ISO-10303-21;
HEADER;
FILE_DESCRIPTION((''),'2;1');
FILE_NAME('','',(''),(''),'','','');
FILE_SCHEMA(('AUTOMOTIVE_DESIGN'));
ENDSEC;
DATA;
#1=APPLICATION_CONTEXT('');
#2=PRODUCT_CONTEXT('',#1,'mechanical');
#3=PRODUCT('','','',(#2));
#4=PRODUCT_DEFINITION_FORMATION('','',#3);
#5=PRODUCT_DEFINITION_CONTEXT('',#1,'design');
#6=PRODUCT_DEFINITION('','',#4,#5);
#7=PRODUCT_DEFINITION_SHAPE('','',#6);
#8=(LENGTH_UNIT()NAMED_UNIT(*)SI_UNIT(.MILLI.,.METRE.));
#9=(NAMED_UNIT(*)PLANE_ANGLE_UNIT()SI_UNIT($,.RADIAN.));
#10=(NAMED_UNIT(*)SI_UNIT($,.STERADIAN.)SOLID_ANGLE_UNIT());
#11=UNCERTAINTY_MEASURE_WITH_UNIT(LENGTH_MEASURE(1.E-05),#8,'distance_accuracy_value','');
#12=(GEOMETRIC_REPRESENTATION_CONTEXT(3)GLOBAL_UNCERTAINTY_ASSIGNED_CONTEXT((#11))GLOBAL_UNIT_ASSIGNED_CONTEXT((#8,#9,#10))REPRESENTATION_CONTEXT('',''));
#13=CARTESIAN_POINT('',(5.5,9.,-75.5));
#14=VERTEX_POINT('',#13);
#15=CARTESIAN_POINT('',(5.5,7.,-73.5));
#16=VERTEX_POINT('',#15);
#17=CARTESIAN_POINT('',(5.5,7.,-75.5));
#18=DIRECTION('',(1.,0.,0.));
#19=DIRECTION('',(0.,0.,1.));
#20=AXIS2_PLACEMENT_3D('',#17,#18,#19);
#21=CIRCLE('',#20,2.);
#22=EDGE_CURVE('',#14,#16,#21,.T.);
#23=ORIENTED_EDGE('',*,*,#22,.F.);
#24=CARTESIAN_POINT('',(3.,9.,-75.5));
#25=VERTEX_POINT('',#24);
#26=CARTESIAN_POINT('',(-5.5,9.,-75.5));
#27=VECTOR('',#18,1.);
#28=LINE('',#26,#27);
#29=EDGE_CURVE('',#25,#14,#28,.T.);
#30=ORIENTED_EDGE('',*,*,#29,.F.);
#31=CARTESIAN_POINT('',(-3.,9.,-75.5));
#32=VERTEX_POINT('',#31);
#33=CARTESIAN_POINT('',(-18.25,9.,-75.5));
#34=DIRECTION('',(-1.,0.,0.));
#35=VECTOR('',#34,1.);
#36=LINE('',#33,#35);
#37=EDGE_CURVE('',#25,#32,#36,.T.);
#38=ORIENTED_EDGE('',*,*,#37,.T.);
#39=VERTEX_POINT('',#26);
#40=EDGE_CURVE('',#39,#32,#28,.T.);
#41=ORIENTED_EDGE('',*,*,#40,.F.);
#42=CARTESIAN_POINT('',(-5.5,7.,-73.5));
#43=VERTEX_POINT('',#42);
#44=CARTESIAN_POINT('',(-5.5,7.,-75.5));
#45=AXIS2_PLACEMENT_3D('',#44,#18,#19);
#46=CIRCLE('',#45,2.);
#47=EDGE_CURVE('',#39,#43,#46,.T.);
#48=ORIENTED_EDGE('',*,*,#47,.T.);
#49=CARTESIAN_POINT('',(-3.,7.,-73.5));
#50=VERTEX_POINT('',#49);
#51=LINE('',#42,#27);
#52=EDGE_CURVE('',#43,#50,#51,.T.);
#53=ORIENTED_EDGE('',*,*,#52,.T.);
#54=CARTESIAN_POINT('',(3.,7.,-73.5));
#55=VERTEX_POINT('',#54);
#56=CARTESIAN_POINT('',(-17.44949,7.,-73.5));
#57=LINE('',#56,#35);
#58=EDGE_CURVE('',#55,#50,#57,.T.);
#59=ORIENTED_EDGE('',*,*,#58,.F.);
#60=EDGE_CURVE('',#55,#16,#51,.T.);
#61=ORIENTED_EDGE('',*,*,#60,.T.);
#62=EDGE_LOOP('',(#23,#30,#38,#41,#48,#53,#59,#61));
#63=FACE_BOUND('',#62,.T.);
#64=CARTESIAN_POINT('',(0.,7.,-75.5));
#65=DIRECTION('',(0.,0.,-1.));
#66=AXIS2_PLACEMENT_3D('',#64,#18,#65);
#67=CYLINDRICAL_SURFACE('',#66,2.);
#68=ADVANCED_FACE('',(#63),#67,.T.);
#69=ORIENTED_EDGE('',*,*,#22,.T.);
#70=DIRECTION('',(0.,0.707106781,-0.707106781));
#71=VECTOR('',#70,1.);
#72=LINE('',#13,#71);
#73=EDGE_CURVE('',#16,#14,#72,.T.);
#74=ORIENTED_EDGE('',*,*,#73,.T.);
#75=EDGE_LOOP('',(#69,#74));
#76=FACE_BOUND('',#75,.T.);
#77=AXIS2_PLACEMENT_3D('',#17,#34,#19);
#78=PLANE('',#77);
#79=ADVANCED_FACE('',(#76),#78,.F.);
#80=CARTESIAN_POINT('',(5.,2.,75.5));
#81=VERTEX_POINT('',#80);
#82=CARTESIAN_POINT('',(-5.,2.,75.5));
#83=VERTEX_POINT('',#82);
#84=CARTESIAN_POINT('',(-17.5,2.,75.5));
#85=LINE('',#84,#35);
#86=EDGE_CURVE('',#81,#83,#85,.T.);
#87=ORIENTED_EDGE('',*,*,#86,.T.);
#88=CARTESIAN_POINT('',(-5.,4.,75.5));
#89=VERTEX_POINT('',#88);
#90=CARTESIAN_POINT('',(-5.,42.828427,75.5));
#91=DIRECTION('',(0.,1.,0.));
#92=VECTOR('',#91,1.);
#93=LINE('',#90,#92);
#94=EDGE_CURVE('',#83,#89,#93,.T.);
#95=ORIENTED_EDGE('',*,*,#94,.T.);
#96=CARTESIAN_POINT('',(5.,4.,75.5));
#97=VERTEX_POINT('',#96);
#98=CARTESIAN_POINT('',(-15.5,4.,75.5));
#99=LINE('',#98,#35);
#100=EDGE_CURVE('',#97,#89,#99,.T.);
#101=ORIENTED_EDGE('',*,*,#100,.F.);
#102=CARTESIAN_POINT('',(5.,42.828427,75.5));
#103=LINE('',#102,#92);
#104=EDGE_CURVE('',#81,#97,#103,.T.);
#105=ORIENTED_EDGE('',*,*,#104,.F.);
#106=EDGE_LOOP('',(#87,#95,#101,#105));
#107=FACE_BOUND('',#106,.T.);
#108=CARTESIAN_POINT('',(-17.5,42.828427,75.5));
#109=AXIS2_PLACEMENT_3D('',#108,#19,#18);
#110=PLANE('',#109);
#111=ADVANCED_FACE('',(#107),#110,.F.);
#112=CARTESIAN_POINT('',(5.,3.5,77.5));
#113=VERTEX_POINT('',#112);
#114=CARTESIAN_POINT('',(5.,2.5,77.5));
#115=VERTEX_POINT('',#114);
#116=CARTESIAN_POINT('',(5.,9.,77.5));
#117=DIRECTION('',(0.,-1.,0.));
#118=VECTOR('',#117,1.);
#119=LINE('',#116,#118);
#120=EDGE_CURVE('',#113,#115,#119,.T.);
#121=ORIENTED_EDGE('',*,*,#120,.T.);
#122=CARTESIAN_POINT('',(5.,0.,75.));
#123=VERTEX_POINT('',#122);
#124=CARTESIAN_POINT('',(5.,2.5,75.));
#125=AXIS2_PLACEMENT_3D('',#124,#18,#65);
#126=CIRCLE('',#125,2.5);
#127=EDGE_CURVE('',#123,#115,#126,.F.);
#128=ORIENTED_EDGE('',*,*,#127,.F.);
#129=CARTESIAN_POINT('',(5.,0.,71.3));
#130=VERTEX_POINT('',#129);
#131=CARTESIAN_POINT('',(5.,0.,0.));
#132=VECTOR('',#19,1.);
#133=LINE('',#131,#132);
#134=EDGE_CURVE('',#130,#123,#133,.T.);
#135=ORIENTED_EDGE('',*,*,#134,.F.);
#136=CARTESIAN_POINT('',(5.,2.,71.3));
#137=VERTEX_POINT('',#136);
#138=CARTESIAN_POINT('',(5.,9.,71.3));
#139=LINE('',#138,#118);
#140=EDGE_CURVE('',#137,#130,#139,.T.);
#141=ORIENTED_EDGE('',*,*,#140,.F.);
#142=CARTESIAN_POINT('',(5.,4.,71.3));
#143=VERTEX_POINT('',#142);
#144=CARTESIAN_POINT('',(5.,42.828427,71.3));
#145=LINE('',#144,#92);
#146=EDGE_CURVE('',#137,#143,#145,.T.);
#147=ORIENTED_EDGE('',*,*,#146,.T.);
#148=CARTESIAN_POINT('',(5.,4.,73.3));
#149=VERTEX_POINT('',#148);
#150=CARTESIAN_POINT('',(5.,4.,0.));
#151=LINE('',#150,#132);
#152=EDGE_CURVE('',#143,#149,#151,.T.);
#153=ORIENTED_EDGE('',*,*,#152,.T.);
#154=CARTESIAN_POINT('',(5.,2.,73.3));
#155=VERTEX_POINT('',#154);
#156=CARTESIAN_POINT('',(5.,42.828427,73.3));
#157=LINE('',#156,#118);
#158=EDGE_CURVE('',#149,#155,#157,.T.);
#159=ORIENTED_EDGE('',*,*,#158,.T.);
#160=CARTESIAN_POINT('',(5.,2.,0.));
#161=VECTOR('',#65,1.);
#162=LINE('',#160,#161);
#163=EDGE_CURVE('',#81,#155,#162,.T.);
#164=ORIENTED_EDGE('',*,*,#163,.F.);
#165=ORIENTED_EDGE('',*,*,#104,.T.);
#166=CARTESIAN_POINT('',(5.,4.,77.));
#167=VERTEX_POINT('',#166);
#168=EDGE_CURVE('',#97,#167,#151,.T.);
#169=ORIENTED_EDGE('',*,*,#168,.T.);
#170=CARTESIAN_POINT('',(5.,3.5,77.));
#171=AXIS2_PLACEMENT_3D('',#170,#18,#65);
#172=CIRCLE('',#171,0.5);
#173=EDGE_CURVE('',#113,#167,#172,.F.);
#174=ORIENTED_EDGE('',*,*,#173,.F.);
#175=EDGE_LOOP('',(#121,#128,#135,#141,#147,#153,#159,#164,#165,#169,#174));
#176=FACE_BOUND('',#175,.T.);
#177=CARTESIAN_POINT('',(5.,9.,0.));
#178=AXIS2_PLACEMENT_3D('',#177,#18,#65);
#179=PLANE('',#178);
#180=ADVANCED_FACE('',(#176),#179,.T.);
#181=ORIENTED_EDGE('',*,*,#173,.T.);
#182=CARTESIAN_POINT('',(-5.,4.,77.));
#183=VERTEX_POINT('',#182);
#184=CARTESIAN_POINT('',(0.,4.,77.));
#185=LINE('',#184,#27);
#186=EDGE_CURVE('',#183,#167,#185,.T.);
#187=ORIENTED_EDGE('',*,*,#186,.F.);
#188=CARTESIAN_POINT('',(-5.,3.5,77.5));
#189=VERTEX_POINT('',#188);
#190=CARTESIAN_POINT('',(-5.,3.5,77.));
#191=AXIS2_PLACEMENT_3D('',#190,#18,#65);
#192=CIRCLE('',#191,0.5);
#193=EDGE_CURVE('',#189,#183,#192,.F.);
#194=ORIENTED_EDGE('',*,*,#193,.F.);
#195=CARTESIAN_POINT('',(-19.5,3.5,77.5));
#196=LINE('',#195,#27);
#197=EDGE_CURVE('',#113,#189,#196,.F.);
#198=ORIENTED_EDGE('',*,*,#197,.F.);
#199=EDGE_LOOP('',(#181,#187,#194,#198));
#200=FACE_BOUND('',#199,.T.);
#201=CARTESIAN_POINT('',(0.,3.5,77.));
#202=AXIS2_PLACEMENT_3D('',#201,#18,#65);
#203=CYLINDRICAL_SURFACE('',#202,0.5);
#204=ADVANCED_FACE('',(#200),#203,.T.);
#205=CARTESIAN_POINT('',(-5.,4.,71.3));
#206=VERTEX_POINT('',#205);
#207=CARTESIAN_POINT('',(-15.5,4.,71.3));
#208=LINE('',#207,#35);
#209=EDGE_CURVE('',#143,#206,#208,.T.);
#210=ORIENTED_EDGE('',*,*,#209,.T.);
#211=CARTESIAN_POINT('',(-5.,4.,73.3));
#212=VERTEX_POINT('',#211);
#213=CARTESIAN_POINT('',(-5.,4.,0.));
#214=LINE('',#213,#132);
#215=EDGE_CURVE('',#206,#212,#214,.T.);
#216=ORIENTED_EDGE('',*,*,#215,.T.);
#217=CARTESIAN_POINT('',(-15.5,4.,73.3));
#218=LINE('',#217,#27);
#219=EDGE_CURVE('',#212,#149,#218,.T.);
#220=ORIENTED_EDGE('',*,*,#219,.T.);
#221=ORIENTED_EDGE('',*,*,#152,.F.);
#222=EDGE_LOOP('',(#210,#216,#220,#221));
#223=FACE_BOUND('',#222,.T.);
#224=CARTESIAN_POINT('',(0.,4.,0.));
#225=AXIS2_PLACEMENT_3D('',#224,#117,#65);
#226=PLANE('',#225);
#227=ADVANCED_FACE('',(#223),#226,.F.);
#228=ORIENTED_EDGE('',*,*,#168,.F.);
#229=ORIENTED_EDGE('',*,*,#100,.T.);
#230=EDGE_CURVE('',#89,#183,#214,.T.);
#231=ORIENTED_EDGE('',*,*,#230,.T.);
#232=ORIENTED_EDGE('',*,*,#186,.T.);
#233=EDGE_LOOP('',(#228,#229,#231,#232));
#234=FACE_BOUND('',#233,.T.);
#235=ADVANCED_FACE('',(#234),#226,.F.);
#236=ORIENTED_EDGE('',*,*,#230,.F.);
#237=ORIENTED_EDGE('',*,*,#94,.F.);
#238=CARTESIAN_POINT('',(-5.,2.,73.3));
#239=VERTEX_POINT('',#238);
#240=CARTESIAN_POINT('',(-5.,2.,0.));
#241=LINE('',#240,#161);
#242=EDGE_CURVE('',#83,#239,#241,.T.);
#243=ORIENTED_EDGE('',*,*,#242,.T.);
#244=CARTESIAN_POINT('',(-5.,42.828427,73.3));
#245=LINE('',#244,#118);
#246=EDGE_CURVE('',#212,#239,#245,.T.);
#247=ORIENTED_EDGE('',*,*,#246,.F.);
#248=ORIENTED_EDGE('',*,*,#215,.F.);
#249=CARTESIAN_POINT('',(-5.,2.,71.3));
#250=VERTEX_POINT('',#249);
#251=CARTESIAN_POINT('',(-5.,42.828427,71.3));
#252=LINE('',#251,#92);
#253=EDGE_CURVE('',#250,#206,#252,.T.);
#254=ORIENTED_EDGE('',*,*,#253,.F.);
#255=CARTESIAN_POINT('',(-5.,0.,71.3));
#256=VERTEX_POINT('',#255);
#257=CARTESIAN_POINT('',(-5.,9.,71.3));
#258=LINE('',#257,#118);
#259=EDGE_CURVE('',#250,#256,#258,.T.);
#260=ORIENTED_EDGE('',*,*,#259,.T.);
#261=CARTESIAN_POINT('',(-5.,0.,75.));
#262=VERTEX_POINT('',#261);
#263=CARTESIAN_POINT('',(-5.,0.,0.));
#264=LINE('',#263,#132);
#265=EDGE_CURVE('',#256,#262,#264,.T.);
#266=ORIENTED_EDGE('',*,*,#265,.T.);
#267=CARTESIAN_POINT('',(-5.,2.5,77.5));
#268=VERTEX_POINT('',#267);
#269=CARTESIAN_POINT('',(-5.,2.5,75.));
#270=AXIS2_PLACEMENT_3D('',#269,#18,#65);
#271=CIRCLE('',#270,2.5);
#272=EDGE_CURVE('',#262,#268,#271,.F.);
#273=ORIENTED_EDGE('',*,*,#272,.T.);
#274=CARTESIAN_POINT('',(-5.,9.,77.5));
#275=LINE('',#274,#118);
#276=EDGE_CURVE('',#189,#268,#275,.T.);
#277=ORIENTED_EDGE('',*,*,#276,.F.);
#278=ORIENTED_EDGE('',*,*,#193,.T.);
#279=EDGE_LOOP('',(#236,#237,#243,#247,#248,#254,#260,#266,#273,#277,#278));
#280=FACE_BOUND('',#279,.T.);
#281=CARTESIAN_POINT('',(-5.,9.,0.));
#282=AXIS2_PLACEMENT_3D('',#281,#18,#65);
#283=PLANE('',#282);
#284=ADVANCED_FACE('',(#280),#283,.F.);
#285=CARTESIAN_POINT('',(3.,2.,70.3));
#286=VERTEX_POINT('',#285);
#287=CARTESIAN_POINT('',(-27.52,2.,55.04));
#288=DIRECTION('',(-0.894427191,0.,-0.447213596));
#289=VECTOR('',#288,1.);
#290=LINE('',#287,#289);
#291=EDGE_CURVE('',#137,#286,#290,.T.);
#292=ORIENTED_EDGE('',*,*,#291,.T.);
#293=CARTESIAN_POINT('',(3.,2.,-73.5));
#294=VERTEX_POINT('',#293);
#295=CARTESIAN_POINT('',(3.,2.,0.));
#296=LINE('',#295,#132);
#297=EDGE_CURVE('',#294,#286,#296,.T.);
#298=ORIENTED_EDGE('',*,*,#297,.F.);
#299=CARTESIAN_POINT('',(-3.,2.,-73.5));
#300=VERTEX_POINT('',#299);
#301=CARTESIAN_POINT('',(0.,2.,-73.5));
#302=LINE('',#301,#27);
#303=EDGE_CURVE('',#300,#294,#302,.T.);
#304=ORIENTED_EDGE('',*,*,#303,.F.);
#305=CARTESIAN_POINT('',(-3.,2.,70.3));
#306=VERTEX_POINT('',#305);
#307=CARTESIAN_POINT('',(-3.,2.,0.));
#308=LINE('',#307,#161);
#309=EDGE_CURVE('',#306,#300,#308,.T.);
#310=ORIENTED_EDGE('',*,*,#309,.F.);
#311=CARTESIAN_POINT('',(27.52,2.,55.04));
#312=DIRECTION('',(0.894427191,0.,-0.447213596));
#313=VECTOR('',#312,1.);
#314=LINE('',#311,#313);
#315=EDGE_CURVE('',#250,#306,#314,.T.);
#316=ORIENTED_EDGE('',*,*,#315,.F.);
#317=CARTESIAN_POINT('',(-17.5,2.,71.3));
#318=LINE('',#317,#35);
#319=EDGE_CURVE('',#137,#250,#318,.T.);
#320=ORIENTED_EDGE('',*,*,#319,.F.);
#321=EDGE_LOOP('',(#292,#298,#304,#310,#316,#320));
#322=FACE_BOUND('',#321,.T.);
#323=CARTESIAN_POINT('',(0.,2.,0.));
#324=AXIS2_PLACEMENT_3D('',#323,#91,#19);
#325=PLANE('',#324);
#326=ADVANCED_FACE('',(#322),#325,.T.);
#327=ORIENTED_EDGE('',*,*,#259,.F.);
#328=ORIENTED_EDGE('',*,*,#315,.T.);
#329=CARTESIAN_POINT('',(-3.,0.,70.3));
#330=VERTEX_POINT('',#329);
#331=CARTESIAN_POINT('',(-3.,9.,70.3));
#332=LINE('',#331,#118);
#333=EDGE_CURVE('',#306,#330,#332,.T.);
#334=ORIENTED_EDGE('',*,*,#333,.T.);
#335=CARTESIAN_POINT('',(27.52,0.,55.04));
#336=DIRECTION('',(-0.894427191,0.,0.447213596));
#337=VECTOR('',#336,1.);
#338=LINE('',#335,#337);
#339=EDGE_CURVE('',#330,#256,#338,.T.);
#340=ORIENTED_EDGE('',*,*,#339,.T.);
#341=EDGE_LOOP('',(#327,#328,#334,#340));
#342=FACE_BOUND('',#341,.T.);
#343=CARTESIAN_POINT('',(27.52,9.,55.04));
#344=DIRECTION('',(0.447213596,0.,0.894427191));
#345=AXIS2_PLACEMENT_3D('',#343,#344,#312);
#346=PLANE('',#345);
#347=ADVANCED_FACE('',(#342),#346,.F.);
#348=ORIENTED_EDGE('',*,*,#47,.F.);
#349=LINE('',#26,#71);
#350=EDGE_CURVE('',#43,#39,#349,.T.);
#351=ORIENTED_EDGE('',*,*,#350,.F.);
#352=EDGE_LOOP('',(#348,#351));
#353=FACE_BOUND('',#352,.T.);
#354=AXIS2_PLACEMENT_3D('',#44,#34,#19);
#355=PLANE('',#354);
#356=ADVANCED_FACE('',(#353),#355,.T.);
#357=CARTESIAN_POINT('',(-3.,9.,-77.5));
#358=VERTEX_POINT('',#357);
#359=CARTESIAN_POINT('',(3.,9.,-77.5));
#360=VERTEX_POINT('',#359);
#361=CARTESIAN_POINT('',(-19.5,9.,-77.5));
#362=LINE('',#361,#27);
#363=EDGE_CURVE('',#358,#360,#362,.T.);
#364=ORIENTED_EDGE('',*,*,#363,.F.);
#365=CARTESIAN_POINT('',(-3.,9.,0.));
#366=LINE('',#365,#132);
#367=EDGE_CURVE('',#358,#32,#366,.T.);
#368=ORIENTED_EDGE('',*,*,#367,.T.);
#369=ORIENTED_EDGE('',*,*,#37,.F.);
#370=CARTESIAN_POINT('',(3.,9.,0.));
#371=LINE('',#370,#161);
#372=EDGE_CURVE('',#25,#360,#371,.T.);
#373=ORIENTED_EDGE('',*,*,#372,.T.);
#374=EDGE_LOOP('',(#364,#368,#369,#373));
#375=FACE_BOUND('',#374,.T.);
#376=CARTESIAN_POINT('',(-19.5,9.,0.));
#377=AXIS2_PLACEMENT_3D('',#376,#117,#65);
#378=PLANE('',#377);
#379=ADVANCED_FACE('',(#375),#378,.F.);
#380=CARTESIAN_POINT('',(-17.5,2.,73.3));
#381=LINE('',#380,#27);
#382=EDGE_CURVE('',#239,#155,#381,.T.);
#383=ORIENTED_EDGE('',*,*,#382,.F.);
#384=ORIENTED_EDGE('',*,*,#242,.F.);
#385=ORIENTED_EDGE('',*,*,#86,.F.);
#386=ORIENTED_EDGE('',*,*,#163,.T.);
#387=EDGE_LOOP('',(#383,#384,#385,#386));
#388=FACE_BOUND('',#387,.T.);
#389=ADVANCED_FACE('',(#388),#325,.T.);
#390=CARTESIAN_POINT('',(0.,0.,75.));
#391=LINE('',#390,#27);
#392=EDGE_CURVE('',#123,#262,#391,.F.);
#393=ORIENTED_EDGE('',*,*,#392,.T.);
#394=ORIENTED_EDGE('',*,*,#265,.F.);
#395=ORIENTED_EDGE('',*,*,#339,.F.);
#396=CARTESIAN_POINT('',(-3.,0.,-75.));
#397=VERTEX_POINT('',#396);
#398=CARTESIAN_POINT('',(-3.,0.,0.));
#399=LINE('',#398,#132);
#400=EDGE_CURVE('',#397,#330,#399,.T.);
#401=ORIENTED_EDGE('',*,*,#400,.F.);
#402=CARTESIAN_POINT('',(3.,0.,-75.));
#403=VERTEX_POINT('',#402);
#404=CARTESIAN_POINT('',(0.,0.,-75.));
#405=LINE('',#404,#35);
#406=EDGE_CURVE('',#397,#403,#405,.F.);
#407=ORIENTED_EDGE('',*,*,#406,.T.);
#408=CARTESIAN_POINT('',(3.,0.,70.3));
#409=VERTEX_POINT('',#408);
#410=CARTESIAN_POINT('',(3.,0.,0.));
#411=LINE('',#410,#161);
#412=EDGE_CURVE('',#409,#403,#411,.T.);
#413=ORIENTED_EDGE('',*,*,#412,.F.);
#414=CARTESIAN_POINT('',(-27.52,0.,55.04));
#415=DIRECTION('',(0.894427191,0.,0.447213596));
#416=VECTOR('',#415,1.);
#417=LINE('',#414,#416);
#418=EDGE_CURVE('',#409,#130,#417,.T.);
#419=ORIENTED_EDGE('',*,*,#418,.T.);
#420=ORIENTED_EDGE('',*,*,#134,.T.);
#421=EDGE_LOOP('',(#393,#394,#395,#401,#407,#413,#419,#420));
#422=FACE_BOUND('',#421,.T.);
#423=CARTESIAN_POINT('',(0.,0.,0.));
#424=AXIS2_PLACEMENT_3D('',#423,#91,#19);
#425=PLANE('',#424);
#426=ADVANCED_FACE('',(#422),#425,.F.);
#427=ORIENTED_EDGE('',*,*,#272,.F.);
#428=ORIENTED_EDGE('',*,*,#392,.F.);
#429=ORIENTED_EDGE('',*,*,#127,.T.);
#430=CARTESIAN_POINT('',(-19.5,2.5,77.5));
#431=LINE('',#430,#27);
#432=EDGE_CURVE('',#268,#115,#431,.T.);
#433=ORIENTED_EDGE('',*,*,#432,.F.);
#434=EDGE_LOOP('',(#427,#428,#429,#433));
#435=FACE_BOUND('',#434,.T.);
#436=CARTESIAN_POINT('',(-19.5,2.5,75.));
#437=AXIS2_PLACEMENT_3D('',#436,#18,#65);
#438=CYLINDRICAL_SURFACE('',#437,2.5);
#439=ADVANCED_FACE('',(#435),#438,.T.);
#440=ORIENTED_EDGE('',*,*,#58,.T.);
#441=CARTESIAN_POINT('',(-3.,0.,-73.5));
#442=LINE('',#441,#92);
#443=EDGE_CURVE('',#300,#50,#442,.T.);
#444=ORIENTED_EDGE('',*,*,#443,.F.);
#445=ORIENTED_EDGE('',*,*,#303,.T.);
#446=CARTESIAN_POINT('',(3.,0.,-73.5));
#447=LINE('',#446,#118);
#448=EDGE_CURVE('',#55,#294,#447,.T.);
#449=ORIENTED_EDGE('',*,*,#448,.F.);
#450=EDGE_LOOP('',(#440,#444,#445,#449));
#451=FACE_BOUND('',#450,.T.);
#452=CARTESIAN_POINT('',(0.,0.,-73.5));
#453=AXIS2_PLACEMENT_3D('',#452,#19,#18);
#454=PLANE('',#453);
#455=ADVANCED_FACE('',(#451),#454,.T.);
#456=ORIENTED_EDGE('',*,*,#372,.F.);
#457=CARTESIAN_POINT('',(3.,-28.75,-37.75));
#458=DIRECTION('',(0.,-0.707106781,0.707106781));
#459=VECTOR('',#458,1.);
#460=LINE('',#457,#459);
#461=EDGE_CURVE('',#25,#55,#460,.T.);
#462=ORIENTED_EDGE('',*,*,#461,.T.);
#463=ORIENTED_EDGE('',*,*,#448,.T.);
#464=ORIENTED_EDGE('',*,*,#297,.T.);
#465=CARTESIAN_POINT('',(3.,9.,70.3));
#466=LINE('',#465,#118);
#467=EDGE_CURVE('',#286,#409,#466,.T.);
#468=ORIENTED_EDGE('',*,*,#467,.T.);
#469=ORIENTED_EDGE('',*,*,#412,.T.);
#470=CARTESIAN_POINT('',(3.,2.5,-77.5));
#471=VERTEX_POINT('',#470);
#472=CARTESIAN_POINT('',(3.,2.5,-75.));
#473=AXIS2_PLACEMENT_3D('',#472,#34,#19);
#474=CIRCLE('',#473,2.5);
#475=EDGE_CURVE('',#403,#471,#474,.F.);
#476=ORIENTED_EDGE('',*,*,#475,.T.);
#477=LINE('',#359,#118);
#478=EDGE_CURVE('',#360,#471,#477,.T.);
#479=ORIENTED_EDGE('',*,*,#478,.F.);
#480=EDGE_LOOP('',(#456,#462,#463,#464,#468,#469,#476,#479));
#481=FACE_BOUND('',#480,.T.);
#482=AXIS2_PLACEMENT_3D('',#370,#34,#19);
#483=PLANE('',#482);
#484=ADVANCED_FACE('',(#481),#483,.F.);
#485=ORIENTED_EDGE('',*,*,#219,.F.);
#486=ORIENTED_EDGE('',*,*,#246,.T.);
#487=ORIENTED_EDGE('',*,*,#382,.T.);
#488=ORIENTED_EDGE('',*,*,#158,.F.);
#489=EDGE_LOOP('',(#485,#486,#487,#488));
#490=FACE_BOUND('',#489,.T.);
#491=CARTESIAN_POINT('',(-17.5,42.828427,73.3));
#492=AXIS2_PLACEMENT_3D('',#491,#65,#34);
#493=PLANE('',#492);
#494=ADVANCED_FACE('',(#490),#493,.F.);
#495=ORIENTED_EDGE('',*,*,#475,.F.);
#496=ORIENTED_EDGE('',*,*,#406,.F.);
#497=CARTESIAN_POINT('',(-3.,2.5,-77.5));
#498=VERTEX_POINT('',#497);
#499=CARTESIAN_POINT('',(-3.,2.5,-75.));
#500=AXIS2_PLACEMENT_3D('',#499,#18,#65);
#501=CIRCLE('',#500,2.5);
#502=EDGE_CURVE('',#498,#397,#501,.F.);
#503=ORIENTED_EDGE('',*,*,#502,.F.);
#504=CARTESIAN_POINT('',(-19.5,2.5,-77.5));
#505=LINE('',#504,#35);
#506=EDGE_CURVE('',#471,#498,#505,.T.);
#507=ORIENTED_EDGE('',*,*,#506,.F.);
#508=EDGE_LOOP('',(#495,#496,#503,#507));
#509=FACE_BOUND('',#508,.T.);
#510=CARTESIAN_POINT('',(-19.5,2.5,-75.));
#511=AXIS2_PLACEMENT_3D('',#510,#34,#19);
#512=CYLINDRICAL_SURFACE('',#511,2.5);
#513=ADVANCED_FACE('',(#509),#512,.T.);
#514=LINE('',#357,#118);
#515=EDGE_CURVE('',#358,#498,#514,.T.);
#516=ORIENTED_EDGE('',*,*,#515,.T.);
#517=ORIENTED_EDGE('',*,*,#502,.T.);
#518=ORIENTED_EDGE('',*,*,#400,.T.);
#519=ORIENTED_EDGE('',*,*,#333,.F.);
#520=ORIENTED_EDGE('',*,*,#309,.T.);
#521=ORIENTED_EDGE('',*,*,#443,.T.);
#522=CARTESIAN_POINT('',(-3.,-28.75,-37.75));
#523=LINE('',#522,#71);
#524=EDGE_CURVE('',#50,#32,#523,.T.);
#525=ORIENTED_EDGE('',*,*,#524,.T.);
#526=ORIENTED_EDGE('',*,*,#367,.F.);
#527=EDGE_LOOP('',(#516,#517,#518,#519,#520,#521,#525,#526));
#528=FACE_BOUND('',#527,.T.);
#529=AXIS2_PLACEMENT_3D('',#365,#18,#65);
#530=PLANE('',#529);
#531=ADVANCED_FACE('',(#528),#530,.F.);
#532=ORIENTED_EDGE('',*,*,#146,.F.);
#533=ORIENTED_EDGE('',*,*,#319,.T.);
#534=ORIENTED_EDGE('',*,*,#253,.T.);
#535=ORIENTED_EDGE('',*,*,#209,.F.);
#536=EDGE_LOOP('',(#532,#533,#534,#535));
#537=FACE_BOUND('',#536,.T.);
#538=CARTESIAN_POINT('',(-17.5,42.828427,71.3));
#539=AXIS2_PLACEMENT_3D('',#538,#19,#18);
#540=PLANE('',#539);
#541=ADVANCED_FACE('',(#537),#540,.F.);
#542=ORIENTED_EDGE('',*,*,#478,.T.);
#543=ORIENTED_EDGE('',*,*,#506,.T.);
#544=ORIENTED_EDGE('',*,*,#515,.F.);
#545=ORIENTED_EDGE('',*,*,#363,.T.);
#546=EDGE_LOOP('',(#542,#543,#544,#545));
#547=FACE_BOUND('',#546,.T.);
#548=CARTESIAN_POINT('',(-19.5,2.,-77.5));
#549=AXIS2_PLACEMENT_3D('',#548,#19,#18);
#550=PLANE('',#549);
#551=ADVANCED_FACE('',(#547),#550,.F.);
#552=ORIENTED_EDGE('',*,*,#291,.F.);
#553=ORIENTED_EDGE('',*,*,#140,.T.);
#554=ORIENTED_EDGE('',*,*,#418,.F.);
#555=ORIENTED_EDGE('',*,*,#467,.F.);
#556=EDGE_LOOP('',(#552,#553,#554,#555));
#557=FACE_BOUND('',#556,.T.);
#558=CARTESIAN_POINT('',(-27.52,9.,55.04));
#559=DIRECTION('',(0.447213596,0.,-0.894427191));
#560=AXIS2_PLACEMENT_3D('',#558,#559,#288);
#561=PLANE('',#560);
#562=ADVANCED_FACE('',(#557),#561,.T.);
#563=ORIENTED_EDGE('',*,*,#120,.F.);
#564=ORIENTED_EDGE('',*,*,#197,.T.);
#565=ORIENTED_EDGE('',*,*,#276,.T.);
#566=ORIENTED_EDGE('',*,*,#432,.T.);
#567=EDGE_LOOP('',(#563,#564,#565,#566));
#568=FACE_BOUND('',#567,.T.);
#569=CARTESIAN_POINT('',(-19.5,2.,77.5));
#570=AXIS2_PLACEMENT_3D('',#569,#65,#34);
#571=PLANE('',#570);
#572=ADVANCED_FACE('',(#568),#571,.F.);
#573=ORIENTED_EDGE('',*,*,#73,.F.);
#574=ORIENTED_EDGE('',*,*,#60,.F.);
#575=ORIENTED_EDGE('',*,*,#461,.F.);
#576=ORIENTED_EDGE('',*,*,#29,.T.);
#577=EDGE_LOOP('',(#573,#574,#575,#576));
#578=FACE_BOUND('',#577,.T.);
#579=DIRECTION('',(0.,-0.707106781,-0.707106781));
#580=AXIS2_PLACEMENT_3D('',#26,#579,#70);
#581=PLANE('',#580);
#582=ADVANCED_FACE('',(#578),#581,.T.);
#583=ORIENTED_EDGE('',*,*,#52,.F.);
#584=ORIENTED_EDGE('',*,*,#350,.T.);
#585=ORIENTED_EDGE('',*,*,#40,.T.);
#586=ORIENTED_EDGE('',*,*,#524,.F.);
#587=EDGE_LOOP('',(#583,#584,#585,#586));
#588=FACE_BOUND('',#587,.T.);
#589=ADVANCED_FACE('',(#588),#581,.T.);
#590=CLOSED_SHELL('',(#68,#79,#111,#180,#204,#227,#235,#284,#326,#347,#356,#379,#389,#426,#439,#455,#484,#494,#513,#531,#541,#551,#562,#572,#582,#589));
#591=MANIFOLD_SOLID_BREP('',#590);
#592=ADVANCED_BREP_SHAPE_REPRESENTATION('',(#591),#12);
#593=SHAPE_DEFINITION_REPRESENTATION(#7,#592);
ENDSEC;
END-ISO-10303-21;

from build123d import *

# Parameters (mm, degrees)
SKETCH1_W                       = 39
SKETCH1_H                       = 155
BOSS_EXTRUDE1_DEPTH             = 2
BOSS_EXTRUDE2_DEPTH             = 38
SKETCH3_W                       = 2
SKETCH3_H                       = 2
BOSS_EXTRUDE3_DEPTH             = 38
SKETCH4_W                       = 2
SKETCH4_H                       = 2
BOSS_EXTRUDE4_DEPTH             = 151
SKETCH6_W                       = 35
SKETCH6_H                       = 2.2
CUT_EXTRUDE1_DEPTH              = 160.340045186
SKETCH7_W                       = 35
SKETCH7_H                       = 2.2
CUT_EXTRUDE2_DEPTH              = 89.490112442
SKETCH5_W                       = 31
SKETCH5_H                       = 2
BOSS_EXTRUDE5_DEPTH             = 2
BOSS_EXTRUDE6_REACH             = 91.367
SKETCH8_W                       = 2
SKETCH8_H                       = 2
BOSS_EXTRUDE6_DIRECTION_2_REACH = 91.367
SKETCH10_W                      = 2
SKETCH10_H                      = 2.2
SKETCH10_W_2                    = 2.2
SKETCH10_H_2                    = 2
BOSS_EXTRUDE8_DEPTH             = 2
SKETCH11_W                      = 2
SKETCH11_H                      = 2.2
SKETCH11_W_2                    = 2.2
SKETCH11_H_2                    = 2
BOSS_EXTRUDE9_DEPTH             = 2
FILLET2_R                       = 2.5
SKETCH14_W                      = 36.5
SKETCH14_H                      = 7.75
BOSS_EXTRUDE10_DEPTH            = 2
SKETCH13_W                      = 31
SKETCH13_H                      = 3
CUT_EXTRUDE4_DEPTH              = 2
FILLET3_R                       = 2
FILLET4_R                       = 0.5
SKETCH15_R                      = 5.1
CUT_EXTRUDE5_DEPTH              = 90.367219941
SKETCH16_R                      = 7.1
BOSS_EXTRUDE11_DEPTH            = 1
FILLET5_R                       = 0.5
CUT_EXTRUDE3_DEPTH              = 160.340045186
FILLET6_R                       = 0.4
FILLET7_R                       = 0.5
CUT_EXTRUDE8_DEPTH              = 90.367220028
CUT_EXTRUDE8_DEPTH_BACK         = 90.367220028
CUT_EXTRUDE11_DEPTH             = 81.420768473
CUT_EXTRUDE12_DEPTH             = 80.851424566
CUT_EXTRUDE13_DEPTH             = 2.5
SKETCH27_R                      = 5.1
BOSS_EXTRUDE12_DEPTH            = 2
CUT_EXTRUDE14_DEPTH             = 80.851424533
CUT_EXTRUDE14_DEPTH_BACK        = 80.851424533
SKETCH29_W                      = 92.7
SKETCH29_H                      = 1
SKETCH30_W                      = 2.5
SKETCH30_H                      = 155
CUT_EXTRUDE15_DEPTH             = 80.851424533
BOSS_EXTRUDE13_START            = -14.5
SKETCH31_W                      = 2
SKETCH31_H                      = 5.25
BOSS_EXTRUDE13_DEPTH            = 29
CUT_EXTRUDE16_DEPTH             = 80.35678925
BOSS_EXTRUDE14_DEPTH            = 5.5
BOSS_EXTRUDE14_DEPTH_BACK       = 5.5


with BuildPart() as part:
    # Sketch1 → Boss-Extrude1 (new body)
    with BuildSketch(Plane(origin=(0, 0, 0), x_dir=(1, 0, 0), z_dir=(0, 1, 0))):
        Rectangle(SKETCH1_W, SKETCH1_H)
    extrude(amount=BOSS_EXTRUDE1_DEPTH)

    # Sketch2 → Boss-Extrude2 (add)
    with BuildSketch(Plane(origin=(0, 2, 0), x_dir=(1, 0, 0), z_dir=(0, 1, 0))):
        Polygon((-17.5, -77.5), (-17.5, -75.5), (-17.5, 75.5), (17.5, 75.5), (17.5, -75.5), (17.5, -77.5), (19.5, -77.5), (19.5, 77.5), (-19.5, 77.5), (-19.5, -77.5), align=None)
    extrude(amount=BOSS_EXTRUDE2_DEPTH)

    # Sketch3 → Boss-Extrude3 (add)
    with BuildSketch(Plane(origin=(0, 2, 0), x_dir=(1, 0, 0), z_dir=(0, 1, 0))):
        with Locations((-16.5, -76.5)):
            Rectangle(SKETCH3_W, SKETCH3_H)
        with Locations((-16.5, -72.3)):
            Rectangle(SKETCH3_W, SKETCH3_H)
        with Locations((16.5, -76.5)):
            Rectangle(SKETCH3_W, SKETCH3_H)
        with Locations((16.5, -72.3)):
            Rectangle(SKETCH3_W, SKETCH3_H)
    extrude(amount=BOSS_EXTRUDE3_DEPTH)

    # Sketch4 → Boss-Extrude4 (add)
    with BuildSketch(Plane.XY.offset(-75.5)):
        with Locations((-16.5, 39)):
            Rectangle(SKETCH4_W, SKETCH4_H)
        Polygon((-15.5, 33.8), (-17.5, 31.8), (-17.5, 35.8), (-15.5, 35.8), align=None)
        Polygon((15.5, 35.8), (17.5, 35.8), (17.5, 31.8), (15.5, 33.8), align=None)
        with Locations((16.5, 39)):
            Rectangle(SKETCH4_W, SKETCH4_H)
    extrude(amount=BOSS_EXTRUDE4_DEPTH)

    # Sketch6 → Cut-Extrude1 (cut, through all)
    with BuildSketch(Plane.XY.offset(-75.5)):
        with Locations((0, 36.9)):
            Rectangle(SKETCH6_W, SKETCH6_H)
    extrude(amount=CUT_EXTRUDE1_DEPTH, mode=Mode.SUBTRACT)

    # Sketch7 → Cut-Extrude2 (cut, through all)
    with BuildSketch(Plane(origin=(0, 2, 0), x_dir=(1, 0, 0), z_dir=(0, 1, 0))):
        with Locations((0, -74.4)):
            Rectangle(SKETCH7_W, SKETCH7_H)
    extrude(amount=CUT_EXTRUDE2_DEPTH, mode=Mode.SUBTRACT)

    # Sketch5 → Boss-Extrude5 (add)
    with BuildSketch(Plane(origin=(0, 2, 0), x_dir=(1, 0, 0), z_dir=(0, 1, 0))):
        with Locations((0, -76.5)):
            Rectangle(SKETCH5_W, SKETCH5_H)
        with Locations((0, -72.3)):
            Rectangle(SKETCH5_W, SKETCH5_H)
    extrude(amount=BOSS_EXTRUDE5_DEPTH)

    # Boss-Extrude6: up to this face of the body (flat: up to its plane)
    boss_extrude6_end = Plane(part.part.faces().sort_by_distance((17.5, 16.9, -2.1))[0])
    # Sketch8 → Boss-Extrude6 (add, up to the picked face)
    with BuildSketch(Plane(origin=(0, 0, 0), x_dir=(0, 0, -1), z_dir=(1, 0, 0)), mode=Mode.PRIVATE) as boss_extrude6_sk1:
        with Locations((74.5, 39)):
            Rectangle(SKETCH8_W, SKETCH8_H)
    boss_extrude6_tool1 = split(extrude(boss_extrude6_sk1.sketch, amount=BOSS_EXTRUDE6_REACH, mode=Mode.PRIVATE), bisect_by=boss_extrude6_end, keep=Keep.BOTH, mode=Mode.PRIVATE)
    # Sketch8 → Boss-Extrude6 (add, up to the picked face)
    with BuildSketch(Plane(origin=(0, 0, 0), x_dir=(0, 0, -1), z_dir=(1, 0, 0)), mode=Mode.PRIVATE) as boss_extrude6_sk2:
        Polygon((75.5, 35.8), (73.5, 35.8), (73.5, 33.8), (75.5, 31.8), align=None)
    boss_extrude6_tool2 = split(extrude(boss_extrude6_sk2.sketch, amount=BOSS_EXTRUDE6_REACH, mode=Mode.PRIVATE), bisect_by=boss_extrude6_end, keep=Keep.BOTH, mode=Mode.PRIVATE)
    add(boss_extrude6_tool1.solids().sort_by(Axis((0, 39, -74.5), (1, 0, 0)))[0])
    add(boss_extrude6_tool2.solids().sort_by(Axis((0, 34.244444, -74.611111), (1, 0, 0)))[0])

    # Boss-Extrude6 direction 2: up to this face of the body (flat: up to its plane)
    boss_extrude6_direction_2_end = Plane(part.part.faces().sort_by_distance((-17.5, 16.9, -2.1))[0])
    # Sketch8 → Boss-Extrude6 direction 2 (add, up to the picked face)
    with BuildSketch(Plane(origin=(0, 0, 0), x_dir=(0, 0, -1), z_dir=(1, 0, 0)), mode=Mode.PRIVATE) as boss_extrude6_direction_2_sk1:
        with Locations((74.5, 39)):
            Rectangle(SKETCH8_W, SKETCH8_H)
    boss_extrude6_direction_2_tool1 = split(extrude(boss_extrude6_direction_2_sk1.sketch, amount=-BOSS_EXTRUDE6_DIRECTION_2_REACH, mode=Mode.PRIVATE), bisect_by=boss_extrude6_direction_2_end, keep=Keep.BOTH, mode=Mode.PRIVATE)
    # Sketch8 → Boss-Extrude6 direction 2 (add, up to the picked face)
    with BuildSketch(Plane(origin=(0, 0, 0), x_dir=(0, 0, -1), z_dir=(1, 0, 0)), mode=Mode.PRIVATE) as boss_extrude6_direction_2_sk2:
        Polygon((75.5, 35.8), (73.5, 35.8), (73.5, 33.8), (75.5, 31.8), align=None)
    boss_extrude6_direction_2_tool2 = split(extrude(boss_extrude6_direction_2_sk2.sketch, amount=-BOSS_EXTRUDE6_DIRECTION_2_REACH, mode=Mode.PRIVATE), bisect_by=boss_extrude6_direction_2_end, keep=Keep.BOTH, mode=Mode.PRIVATE)
    add(boss_extrude6_direction_2_tool1.solids().sort_by(Axis((0, 39, -74.5), (-1, 0, 0)))[0])
    add(boss_extrude6_direction_2_tool2.solids().sort_by(Axis((0, 34.244444, -74.611111), (-1, 0, 0)))[0])

    # Sketch10 → Boss-Extrude8 (add)
    with BuildSketch(Plane(origin=(-17.5, 0, 0), x_dir=(0, 0, -1), z_dir=(1, 0, 0))):
        with Locations((-76.5, 36.9)):
            Rectangle(SKETCH10_W, SKETCH10_H)
        with Locations((-74.4, 39)):
            Rectangle(SKETCH10_W_2, SKETCH10_H_2)
    extrude(amount=BOSS_EXTRUDE8_DEPTH)

    # Sketch11 → Boss-Extrude9 (add)
    with BuildSketch(Plane.ZY.offset(-17.5)):
        with Locations((76.5, 36.9)):
            Rectangle(SKETCH11_W, SKETCH11_H)
        with Locations((74.4, 39)):
            Rectangle(SKETCH11_W_2, SKETCH11_H_2)
    extrude(amount=BOSS_EXTRUDE9_DEPTH)

    # Fillet2
    fillet2_edges = [part.edges().sort_by_distance(p)[0] for p in [
        (-17.5, 16.9, 71.3),
        (17.5, 16.9, 71.3),
        (19.5, 20, 77.5),
        (-19.5, 20, 77.5),
        (-19.5, 20, -77.5),
        (-17.5, 16.9, -75.5),
        (17.5, 16.9, -75.5),
        (19.5, 20, -77.5),
        (19.5, 40, 0),
        (-19.5, 40, 0),
        (19.5, 0, 0),
        (-19.5, 0, 0),
        (0, 40, -77.5),
        (0, 0, 77.5),
        (0, 0, -77.5),
        (-17.5, 40, 77.5),
        (17.5, 40, 77.5),
    ]]
    fillet(fillet2_edges, radius=FILLET2_R)

    # Sketch14 → Boss-Extrude10 (add)
    with BuildSketch(Plane.XY.offset(-75.5)):
        with Locations((0, 5.125)):
            Rectangle(SKETCH14_W, SKETCH14_H)
    extrude(amount=BOSS_EXTRUDE10_DEPTH)

    # Sketch13 → Cut-Extrude4 (cut)
    with BuildSketch(Plane(origin=(0, 0, -77.5), x_dir=(-1, 0, 0), z_dir=(0, 0, -1))):
        with Locations((0, 5.5)):
            Rectangle(SKETCH13_W, SKETCH13_H)
    extrude(amount=-CUT_EXTRUDE4_DEPTH, mode=Mode.SUBTRACT)

    # Fillet3
    fillet3_edges = [part.edges().sort_by_distance(p)[0] for p in [
        (0, 9, -73.5),
    ]]
    fillet(fillet3_edges, radius=FILLET3_R - 0.0001)  # a hair under: the kernel refuses the full size

    # Fillet4
    fillet4_edges = [part.edges().sort_by_distance(p)[0] for p in [
        (15.5, 5.5, -75.5),
        (15.5, 4, -76.5),
        (0, 7, -75.5),
        (15.5, 7, -76.5),
        (-15.5, 5.5, -75.5),
        (-15.5, 7, -76.5),
        (0, 4, -75.5),
        (-15.5, 4, -76.5),
        (15.5, 5.5, -77.5),
        (0, 4, -77.5),
        (-15.5, 5.5, -77.5),
        (0, 7, -77.5),
    ]]
    fillet(fillet4_edges, radius=FILLET4_R)

    # Sketch15 → Cut-Extrude5 (cut, through all)
    with BuildSketch(Plane.XZ):
        with Locations(Location((0, 38.75, 0), (0, 0, 270))):
            Circle(SKETCH15_R)
        with Locations(Location((0, -38.75, 0), (0, 0, 270))):
            Circle(SKETCH15_R)
    extrude(amount=-CUT_EXTRUDE5_DEPTH, mode=Mode.SUBTRACT)

    # Sketch16 → Boss-Extrude11 (add)
    with BuildSketch(Plane(origin=(0, 2, 0), x_dir=(1, 0, 0), z_dir=(0, 1, 0))):
        with Locations(Location((0, 38.75, 0), (0, 0, 270))):
            Circle(SKETCH16_R)
        with Locations(Location((0, -38.75, 0), (0, 0, 270))):
            Circle(SKETCH16_R)
    extrude(amount=BOSS_EXTRUDE11_DEPTH)

    # Fillet5
    fillet5_edges = [part.edges().sort_by_distance(p)[0] for p in [
        (0, 2, -45.85),
        (0, 3, -45.85),
        (0, 2, 31.65),
        (0, 3, 31.65),
    ]]
    fillet(fillet5_edges, radius=FILLET5_R - 0.0001)  # a hair under: the kernel refuses the full size

    # Sketch12 → Cut-Extrude3 (cut, through all)
    with BuildSketch(Plane.XY.offset(-75.5)):
        with BuildLine():
            Line((1.668907005, 12.688040659), (2.22520934, 10.250720878))
            ThreePointArc((2.22520934, 10.250720878), (4.338837391, 10.990311321), (6.234898019, 12.181685175))
            Line((6.234898019, 12.181685175), (4.676173514, 14.136263881))
            ThreePointArc((4.676173514, 14.136263881), (3.254128043, 13.242733491), (1.668907005, 12.688040659))
        make_face()
        with BuildLine():
            ThreePointArc((-6.234898019, 12.181685175), (-4.338837391, 10.990311321), (-2.22520934, 10.250720878))
            Line((-2.22520934, 10.250720878), (-1.668907005, 12.688040659))
            ThreePointArc((-1.668907005, 12.688040659), (-3.254128043, 13.242733491), (-4.676173514, 14.136263881))
            Line((-4.676173514, 14.136263881), (-6.234898019, 12.181685175))
        make_face()
        with BuildLine():
            ThreePointArc((-10, 20), (-9.749279122, 17.77479066), (-9.009688679, 15.661162609))
            Line((-9.009688679, 15.661162609), (-6.757266509, 16.745871957))
            ThreePointArc((-6.757266509, 16.745871957), (-7.311959341, 18.331092995), (-7.5, 20))
            Line((-7.5, 20), (-10, 20))
        make_face()
        with BuildLine():
            ThreePointArc((-6.234898019, 27.818314825), (-7.818314825, 26.234898019), (-9.009688679, 24.338837391))
            Line((-9.009688679, 24.338837391), (-6.757266509, 23.254128043))
            ThreePointArc((-6.757266509, 23.254128043), (-5.863736119, 24.676173514), (-4.676173514, 25.863736119))
            Line((-4.676173514, 25.863736119), (-6.234898019, 27.818314825))
        make_face()
        with BuildLine():
            ThreePointArc((-1.668907005, 27.311959341), (-0.839733571, 27.452841574), (0, 27.5))
            Line((0, 27.5), (0, 30))
            ThreePointArc((0, 30), (-1.119644761, 29.937122099), (-2.22520934, 29.749279122))
            Line((-2.22520934, 29.749279122), (-1.668907005, 27.311959341))
        make_face()
        with BuildLine():
            Line((0, 30), (0, 27.5))
            ThreePointArc((0, 27.5), (0.839733571, 27.452841574), (1.668907005, 27.311959341))
            Line((1.668907005, 27.311959341), (2.22520934, 29.749279122))
            ThreePointArc((2.22520934, 29.749279122), (1.119644761, 29.937122099), (0, 30))
        make_face()
        with BuildLine():
            Line((6.757266509, 23.254128043), (9.009688679, 24.338837391))
            ThreePointArc((9.009688679, 24.338837391), (7.818314825, 26.234898019), (6.234898019, 27.818314825))
            Line((6.234898019, 27.818314825), (4.676173514, 25.863736119))
            ThreePointArc((4.676173514, 25.863736119), (5.863736119, 24.676173514), (6.757266509, 23.254128043))
        make_face()
        with BuildLine():
            Line((6.757266509, 16.745871957), (9.009688679, 15.661162609))
            ThreePointArc((9.009688679, 15.661162609), (9.749279122, 17.77479066), (10, 20))
            Line((10, 20), (7.5, 20))
            ThreePointArc((7.5, 20), (7.311959341, 18.331092995), (6.757266509, 16.745871957))
        make_face()
        with BuildLine():
            ThreePointArc((2.5, 20), (2.43731978, 19.443697665), (2.25242217, 18.915290652))
            Line((2.25242217, 18.915290652), (4.50484434, 17.830581304))
            ThreePointArc((4.50484434, 17.830581304), (4.874639561, 18.88739533), (5, 20))
            Line((5, 20), (2.5, 20))
        make_face()
        with BuildLine():
            ThreePointArc((1.558724505, 21.954578706), (1.954578706, 21.558724505), (2.25242217, 21.084709348))
            Line((2.25242217, 21.084709348), (4.50484434, 22.169418696))
            ThreePointArc((4.50484434, 22.169418696), (3.909157412, 23.117449009), (3.117449009, 23.909157412))
            Line((3.117449009, 23.909157412), (1.558724505, 21.954578706))
        make_face()
        with BuildLine():
            Line((0, 25), (0, 22.5))
            ThreePointArc((0, 22.5), (0.27991119, 22.484280525), (0.556302335, 22.43731978))
            Line((0.556302335, 22.43731978), (1.11260467, 24.874639561))
            ThreePointArc((1.11260467, 24.874639561), (0.559822381, 24.968561049), (0, 25))
        make_face()
        with BuildLine():
            ThreePointArc((-0.556302335, 22.43731978), (-0.27991119, 22.484280525), (0, 22.5))
            Line((0, 22.5), (0, 25))
            ThreePointArc((0, 25), (-0.559822381, 24.968561049), (-1.11260467, 24.874639561))
            Line((-1.11260467, 24.874639561), (-0.556302335, 22.43731978))
        make_face()
        with BuildLine():
            ThreePointArc((-2.25242217, 21.084709348), (-1.954578706, 21.558724505), (-1.558724505, 21.954578706))
            Line((-1.558724505, 21.954578706), (-3.117449009, 23.909157412))
            ThreePointArc((-3.117449009, 23.909157412), (-3.909157412, 23.117449009), (-4.50484434, 22.169418696))
            Line((-4.50484434, 22.169418696), (-2.25242217, 21.084709348))
        make_face()
        with BuildLine():
            ThreePointArc((-2.25242217, 18.915290652), (-2.43731978, 19.443697665), (-2.5, 20))
            Line((-2.5, 20), (-5, 20))
            ThreePointArc((-5, 20), (-4.874639561, 18.88739533), (-4.50484434, 17.830581304))
            Line((-4.50484434, 17.830581304), (-2.25242217, 18.915290652))
        make_face()
        with BuildLine():
            ThreePointArc((-3.117449009, 16.090842588), (-2.169418696, 15.49515566), (-1.11260467, 15.125360439))
            Line((-1.11260467, 15.125360439), (-0.556302335, 17.56268022))
            ThreePointArc((-0.556302335, 17.56268022), (-1.084709348, 17.74757783), (-1.558724505, 18.045421294))
            Line((-1.558724505, 18.045421294), (-3.117449009, 16.090842588))
        make_face()
        with BuildLine():
            Line((0.556302335, 17.56268022), (1.11260467, 15.125360439))
            ThreePointArc((1.11260467, 15.125360439), (2.169418696, 15.49515566), (3.117449009, 16.090842588))
            Line((3.117449009, 16.090842588), (1.558724505, 18.045421294))
            ThreePointArc((1.558724505, 18.045421294), (1.084709348, 17.74757783), (0.556302335, 17.56268022))
        make_face()
    extrude(amount=-CUT_EXTRUDE3_DEPTH, mode=Mode.SUBTRACT)

    # Fillet6
    fillet6_edges = [part.edges().sort_by_distance(p)[0] for p in [
        (5.863736119, 24.676173514, -75.5),
        (5.455535766, 26.841025472, -75.5),
        (7.818314825, 26.234898019, -77.5),
        (7.883477594, 23.796482717, -77.5),
        (5.863736119, 24.676173514, -77.5),
        (5.455535766, 26.841025472, -77.5),
        (7.883477594, 23.796482717, -75.5),
        (7.818314825, 26.234898019, -75.5),
        (7.311959341, 18.331092995, -75.5),
        (8.75, 20, -75.5),
        (9.749279122, 17.77479066, -77.5),
        (7.883477594, 16.203517283, -77.5),
        (7.311959341, 18.331092995, -77.5),
        (8.75, 20, -77.5),
        (7.883477594, 16.203517283, -75.5),
        (9.749279122, 17.77479066, -75.5),
        (2.43731978, 19.443697665, -75.5),
        (3.75, 20, -75.5),
        (4.874639561, 18.88739533, -77.5),
        (3.378633255, 18.372935978, -77.5),
        (2.43731978, 19.443697665, -77.5),
        (3.75, 20, -77.5),
        (3.378633255, 18.372935978, -75.5),
        (4.874639561, 18.88739533, -75.5),
        (1.954578706, 21.558724505, -75.5),
        (2.338086757, 22.931868059, -75.5),
        (3.909157412, 23.117449009, -77.5),
        (3.378633255, 21.627064022, -77.5),
        (1.954578706, 21.558724505, -77.5),
        (2.338086757, 22.931868059, -77.5),
        (3.378633255, 21.627064022, -75.5),
        (3.909157412, 23.117449009, -75.5),
        (0, 27.5, -75.5),
        (-1.947058172, 28.530619232, -75.5),
        (0, 30, -77.5),
        (1.947058172, 28.530619232, -77.5),
        (0, 27.5, -77.5),
        (-1.947058172, 28.530619232, -77.5),
        (1.947058172, 28.530619232, -75.5),
        (0, 30, -75.5),
        (-5.863736119, 24.676173514, -75.5),
        (-7.883477594, 23.796482717, -75.5),
        (-7.818314825, 26.234898019, -77.5),
        (-5.455535766, 26.841025472, -77.5),
        (-5.863736119, 24.676173514, -77.5),
        (-7.883477594, 23.796482717, -77.5),
        (-5.455535766, 26.841025472, -75.5),
        (-7.818314825, 26.234898019, -75.5),
        (-7.311959341, 18.331092995, -75.5),
        (-7.883477594, 16.203517283, -75.5),
        (-9.749279122, 17.77479066, -77.5),
        (-8.75, 20, -77.5),
        (-7.311959341, 18.331092995, -77.5),
        (-7.883477594, 16.203517283, -77.5),
        (-8.75, 20, -75.5),
        (-9.749279122, 17.77479066, -75.5),
        (-3.254128043, 13.242733491, -75.5),
        (-1.947058172, 11.469380768, -75.5),
        (-4.338837391, 10.990311321, -77.5),
        (-5.455535766, 13.158974528, -77.5),
        (-3.254128043, 13.242733491, -77.5),
        (-1.947058172, 11.469380768, -77.5),
        (-5.455535766, 13.158974528, -75.5),
        (-4.338837391, 10.990311321, -75.5),
        (1.084709348, 17.74757783, -75.5),
        (2.338086757, 17.068131941, -75.5),
        (2.169418696, 15.49515566, -77.5),
        (0.834453502, 16.344020329, -77.5),
        (1.084709348, 17.74757783, -77.5),
        (2.338086757, 17.068131941, -77.5),
        (0.834453502, 16.344020329, -75.5),
        (2.169418696, 15.49515566, -75.5),
        (-2.43731978, 19.443697665, -75.5),
        (-3.378633255, 18.372935978, -75.5),
        (-4.874639561, 18.88739533, -77.5),
        (-3.75, 20, -77.5),
        (-2.43731978, 19.443697665, -77.5),
        (-3.378633255, 18.372935978, -77.5),
        (-3.75, 20, -75.5),
        (-4.874639561, 18.88739533, -75.5),
        (-1.084709348, 17.74757783, -75.5),
        (-0.834453502, 16.344020329, -75.5),
        (-2.169418696, 15.49515566, -77.5),
        (-2.338086757, 17.068131941, -77.5),
        (-1.084709348, 17.74757783, -77.5),
        (-0.834453502, 16.344020329, -77.5),
        (-2.338086757, 17.068131941, -75.5),
        (-2.169418696, 15.49515566, -75.5),
        (-1.954578706, 21.558724505, -75.5),
        (-3.378633255, 21.627064022, -75.5),
        (-3.909157412, 23.117449009, -77.5),
        (-2.338086757, 22.931868059, -77.5),
        (-1.954578706, 21.558724505, -77.5),
        (-3.378633255, 21.627064022, -77.5),
        (-2.338086757, 22.931868059, -75.5),
        (-3.909157412, 23.117449009, -75.5),
        (0, 25, -77.5),
        (0.834453502, 23.655979671, -77.5),
        (0, 22.5, -75.5),
        (-0.834453502, 23.655979671, -75.5),
        (0, 22.5, -77.5),
        (-0.834453502, 23.655979671, -77.5),
        (0, 25, -75.5),
        (0.834453502, 23.655979671, -75.5),
        (3.254128043, 13.242733491, -75.5),
        (5.455535766, 13.158974528, -75.5),
        (4.338837391, 10.990311321, -77.5),
        (1.947058172, 11.469380768, -77.5),
        (3.254128043, 13.242733491, -77.5),
        (5.455535766, 13.158974528, -77.5),
        (1.947058172, 11.469380768, -75.5),
        (4.338837391, 10.990311321, -75.5),
    ]]
    fillet(fillet6_edges, radius=FILLET6_R)

    # Fillet7
    fillet7_edges = [part.edges().sort_by_distance(p)[0] for p in [
        (15.5, 40, 0.75),
        (0, 4, 77.5),
        (0, 40, -73.5),
        (-15.5, 40, 0.75),
        (-15.5, 20.75, 77.5),
        (-15.5, 39.267766953, 76.767766953),
        (15.5, 20.75, 77.5),
        (15.5, 39.267766953, 76.767766953),
    ]]
    fillet(fillet7_edges, radius=FILLET7_R)

    # Sketch20 → Cut-Extrude8 (cut, two sides: drawn at the far end of the back side and taken through both)
    with BuildSketch(Plane(origin=(0, 0, 0), x_dir=(0, 0, -1), z_dir=(1, 0, 0)).offset(-CUT_EXTRUDE8_DEPTH_BACK)):
        Polygon((77.5, 40), (77.5, 9), (75.5, 9), (73.5, 9), (73.5, 4), (-75.5, 4), (-77.5, 4), (-77.5, 40), align=None)
    extrude(amount=CUT_EXTRUDE8_DEPTH + CUT_EXTRUDE8_DEPTH_BACK, mode=Mode.SUBTRACT)

    # Sketch21 → Cut-Extrude11 (cut, through all)
    with BuildSketch(Plane(origin=(0, 0, 0), x_dir=(1, 0, 0), z_dir=(0, 1, 0))):
        Polygon((17, 77.5), (17, 73.5), (17, -77.5), (19.5, -77.5), (19.5, 77.5), align=None)
        Polygon((-17, 77.5), (-17, 73.5), (-17, -77.5), (-19.5, -77.5), (-19.5, 77.5), align=None)
    extrude(amount=CUT_EXTRUDE11_DEPTH, mode=Mode.SUBTRACT)

    # Sketch24 → Cut-Extrude12 (cut, through all)
    with BuildSketch(Plane(origin=(0, 0, 0), x_dir=(1, 0, 0), z_dir=(0, 1, 0))):
        Polygon((17, -77.5), (15, -77.5), (15, -71.3), (17, -70.3), align=None)
        Polygon((-17, -70.3), (-17, -77.5), (-15, -77.5), (-15, -71.3), align=None)
    extrude(amount=CUT_EXTRUDE12_DEPTH, mode=Mode.SUBTRACT)

    # Sketch26 → Cut-Extrude13 (cut)
    with BuildSketch(Plane(origin=(17, 0, 0), x_dir=(0, 0, -1), z_dir=(1, 0, 0))):
        Polygon((75.5, 9), (73.5, 7), (73.5, 9), align=None)
    cut_extrude13 = extrude(amount=-CUT_EXTRUDE13_DEPTH, mode=Mode.SUBTRACT)

    # Mirror1: Cut-Extrude13 across plane
    add(cut_extrude13.mirror(Plane(origin=(0, 0, 0), x_dir=(0, 0, 1), z_dir=(1, 0, 0))), mode=Mode.SUBTRACT)

    # Sketch27 → Boss-Extrude12 (add)
    with BuildSketch(Plane.XZ):
        with Locations((0, 38.75)):
            Circle(SKETCH27_R)
        with Locations((0, -38.75)):
            Circle(SKETCH27_R)
    extrude(amount=-BOSS_EXTRUDE12_DEPTH)

    # Sketch29 → Cut-Extrude14 (cut, two sides: drawn at the far end of the back side and taken through both)
    with BuildSketch(Plane(origin=(0, 0, 0), x_dir=(0, 0, -1), z_dir=(1, 0, 0)).offset(-CUT_EXTRUDE14_DEPTH_BACK)):
        with Locations((0, 2.5)):
            Rectangle(SKETCH29_W, SKETCH29_H)
    extrude(amount=CUT_EXTRUDE14_DEPTH + CUT_EXTRUDE14_DEPTH_BACK, mode=Mode.SUBTRACT)

    # Sketch30 → Cut-Extrude15 (cut, through all)
    with BuildSketch(Plane(origin=(0, 0, 0), x_dir=(1, 0, 0), z_dir=(0, 1, 0))):
        with Locations((-15.75, 0)):
            Rectangle(SKETCH30_W, SKETCH30_H)
        with Locations((15.75, 0)):
            Rectangle(SKETCH30_W, SKETCH30_H)
    extrude(amount=CUT_EXTRUDE15_DEPTH, mode=Mode.SUBTRACT)

    # Sketch31 → Boss-Extrude13 (add)
    with BuildSketch(Plane(origin=(0, 0, 0), x_dir=(0, 0, -1), z_dir=(1, 0, 0)).offset(BOSS_EXTRUDE13_START)):
        with Locations((76.5, 5.625)):
            Rectangle(SKETCH31_W, SKETCH31_H)
    extrude(amount=BOSS_EXTRUDE13_DEPTH)

    # Sketch32 → Cut-Extrude16 (cut, through all)
    with BuildSketch(Plane(origin=(0, 0, 0), x_dir=(1, 0, 0), z_dir=(0, 1, 0))):
        Polygon((14.5, 77.5), (3, 77.5), (3, -70.3), (5, -71.3), (5, -77.5), (14.5, -77.5), align=None)
        Polygon((-3, -70.3), (-3, 77.5), (-14.5, 77.5), (-14.5, -77.5), (-5, -77.5), (-5, -71.3), align=None)
    extrude(amount=CUT_EXTRUDE16_DEPTH, mode=Mode.SUBTRACT)

    # Sketch33 → Boss-Extrude14 (add, two sides: drawn at the far end of the back side and taken through both)
    with BuildSketch(Plane(origin=(0, 0, 0), x_dir=(0, 0, -1), z_dir=(1, 0, 0)).offset(-BOSS_EXTRUDE14_DEPTH_BACK)):
        with BuildLine():
            Line((75.5, 9), (73.5, 7))
            ThreePointArc((73.5, 7), (74.085786438, 8.414213562), (75.5, 9))
        make_face()
    extrude(amount=BOSS_EXTRUDE14_DEPTH + BOSS_EXTRUDE14_DEPTH_BACK)


solid = part.part
